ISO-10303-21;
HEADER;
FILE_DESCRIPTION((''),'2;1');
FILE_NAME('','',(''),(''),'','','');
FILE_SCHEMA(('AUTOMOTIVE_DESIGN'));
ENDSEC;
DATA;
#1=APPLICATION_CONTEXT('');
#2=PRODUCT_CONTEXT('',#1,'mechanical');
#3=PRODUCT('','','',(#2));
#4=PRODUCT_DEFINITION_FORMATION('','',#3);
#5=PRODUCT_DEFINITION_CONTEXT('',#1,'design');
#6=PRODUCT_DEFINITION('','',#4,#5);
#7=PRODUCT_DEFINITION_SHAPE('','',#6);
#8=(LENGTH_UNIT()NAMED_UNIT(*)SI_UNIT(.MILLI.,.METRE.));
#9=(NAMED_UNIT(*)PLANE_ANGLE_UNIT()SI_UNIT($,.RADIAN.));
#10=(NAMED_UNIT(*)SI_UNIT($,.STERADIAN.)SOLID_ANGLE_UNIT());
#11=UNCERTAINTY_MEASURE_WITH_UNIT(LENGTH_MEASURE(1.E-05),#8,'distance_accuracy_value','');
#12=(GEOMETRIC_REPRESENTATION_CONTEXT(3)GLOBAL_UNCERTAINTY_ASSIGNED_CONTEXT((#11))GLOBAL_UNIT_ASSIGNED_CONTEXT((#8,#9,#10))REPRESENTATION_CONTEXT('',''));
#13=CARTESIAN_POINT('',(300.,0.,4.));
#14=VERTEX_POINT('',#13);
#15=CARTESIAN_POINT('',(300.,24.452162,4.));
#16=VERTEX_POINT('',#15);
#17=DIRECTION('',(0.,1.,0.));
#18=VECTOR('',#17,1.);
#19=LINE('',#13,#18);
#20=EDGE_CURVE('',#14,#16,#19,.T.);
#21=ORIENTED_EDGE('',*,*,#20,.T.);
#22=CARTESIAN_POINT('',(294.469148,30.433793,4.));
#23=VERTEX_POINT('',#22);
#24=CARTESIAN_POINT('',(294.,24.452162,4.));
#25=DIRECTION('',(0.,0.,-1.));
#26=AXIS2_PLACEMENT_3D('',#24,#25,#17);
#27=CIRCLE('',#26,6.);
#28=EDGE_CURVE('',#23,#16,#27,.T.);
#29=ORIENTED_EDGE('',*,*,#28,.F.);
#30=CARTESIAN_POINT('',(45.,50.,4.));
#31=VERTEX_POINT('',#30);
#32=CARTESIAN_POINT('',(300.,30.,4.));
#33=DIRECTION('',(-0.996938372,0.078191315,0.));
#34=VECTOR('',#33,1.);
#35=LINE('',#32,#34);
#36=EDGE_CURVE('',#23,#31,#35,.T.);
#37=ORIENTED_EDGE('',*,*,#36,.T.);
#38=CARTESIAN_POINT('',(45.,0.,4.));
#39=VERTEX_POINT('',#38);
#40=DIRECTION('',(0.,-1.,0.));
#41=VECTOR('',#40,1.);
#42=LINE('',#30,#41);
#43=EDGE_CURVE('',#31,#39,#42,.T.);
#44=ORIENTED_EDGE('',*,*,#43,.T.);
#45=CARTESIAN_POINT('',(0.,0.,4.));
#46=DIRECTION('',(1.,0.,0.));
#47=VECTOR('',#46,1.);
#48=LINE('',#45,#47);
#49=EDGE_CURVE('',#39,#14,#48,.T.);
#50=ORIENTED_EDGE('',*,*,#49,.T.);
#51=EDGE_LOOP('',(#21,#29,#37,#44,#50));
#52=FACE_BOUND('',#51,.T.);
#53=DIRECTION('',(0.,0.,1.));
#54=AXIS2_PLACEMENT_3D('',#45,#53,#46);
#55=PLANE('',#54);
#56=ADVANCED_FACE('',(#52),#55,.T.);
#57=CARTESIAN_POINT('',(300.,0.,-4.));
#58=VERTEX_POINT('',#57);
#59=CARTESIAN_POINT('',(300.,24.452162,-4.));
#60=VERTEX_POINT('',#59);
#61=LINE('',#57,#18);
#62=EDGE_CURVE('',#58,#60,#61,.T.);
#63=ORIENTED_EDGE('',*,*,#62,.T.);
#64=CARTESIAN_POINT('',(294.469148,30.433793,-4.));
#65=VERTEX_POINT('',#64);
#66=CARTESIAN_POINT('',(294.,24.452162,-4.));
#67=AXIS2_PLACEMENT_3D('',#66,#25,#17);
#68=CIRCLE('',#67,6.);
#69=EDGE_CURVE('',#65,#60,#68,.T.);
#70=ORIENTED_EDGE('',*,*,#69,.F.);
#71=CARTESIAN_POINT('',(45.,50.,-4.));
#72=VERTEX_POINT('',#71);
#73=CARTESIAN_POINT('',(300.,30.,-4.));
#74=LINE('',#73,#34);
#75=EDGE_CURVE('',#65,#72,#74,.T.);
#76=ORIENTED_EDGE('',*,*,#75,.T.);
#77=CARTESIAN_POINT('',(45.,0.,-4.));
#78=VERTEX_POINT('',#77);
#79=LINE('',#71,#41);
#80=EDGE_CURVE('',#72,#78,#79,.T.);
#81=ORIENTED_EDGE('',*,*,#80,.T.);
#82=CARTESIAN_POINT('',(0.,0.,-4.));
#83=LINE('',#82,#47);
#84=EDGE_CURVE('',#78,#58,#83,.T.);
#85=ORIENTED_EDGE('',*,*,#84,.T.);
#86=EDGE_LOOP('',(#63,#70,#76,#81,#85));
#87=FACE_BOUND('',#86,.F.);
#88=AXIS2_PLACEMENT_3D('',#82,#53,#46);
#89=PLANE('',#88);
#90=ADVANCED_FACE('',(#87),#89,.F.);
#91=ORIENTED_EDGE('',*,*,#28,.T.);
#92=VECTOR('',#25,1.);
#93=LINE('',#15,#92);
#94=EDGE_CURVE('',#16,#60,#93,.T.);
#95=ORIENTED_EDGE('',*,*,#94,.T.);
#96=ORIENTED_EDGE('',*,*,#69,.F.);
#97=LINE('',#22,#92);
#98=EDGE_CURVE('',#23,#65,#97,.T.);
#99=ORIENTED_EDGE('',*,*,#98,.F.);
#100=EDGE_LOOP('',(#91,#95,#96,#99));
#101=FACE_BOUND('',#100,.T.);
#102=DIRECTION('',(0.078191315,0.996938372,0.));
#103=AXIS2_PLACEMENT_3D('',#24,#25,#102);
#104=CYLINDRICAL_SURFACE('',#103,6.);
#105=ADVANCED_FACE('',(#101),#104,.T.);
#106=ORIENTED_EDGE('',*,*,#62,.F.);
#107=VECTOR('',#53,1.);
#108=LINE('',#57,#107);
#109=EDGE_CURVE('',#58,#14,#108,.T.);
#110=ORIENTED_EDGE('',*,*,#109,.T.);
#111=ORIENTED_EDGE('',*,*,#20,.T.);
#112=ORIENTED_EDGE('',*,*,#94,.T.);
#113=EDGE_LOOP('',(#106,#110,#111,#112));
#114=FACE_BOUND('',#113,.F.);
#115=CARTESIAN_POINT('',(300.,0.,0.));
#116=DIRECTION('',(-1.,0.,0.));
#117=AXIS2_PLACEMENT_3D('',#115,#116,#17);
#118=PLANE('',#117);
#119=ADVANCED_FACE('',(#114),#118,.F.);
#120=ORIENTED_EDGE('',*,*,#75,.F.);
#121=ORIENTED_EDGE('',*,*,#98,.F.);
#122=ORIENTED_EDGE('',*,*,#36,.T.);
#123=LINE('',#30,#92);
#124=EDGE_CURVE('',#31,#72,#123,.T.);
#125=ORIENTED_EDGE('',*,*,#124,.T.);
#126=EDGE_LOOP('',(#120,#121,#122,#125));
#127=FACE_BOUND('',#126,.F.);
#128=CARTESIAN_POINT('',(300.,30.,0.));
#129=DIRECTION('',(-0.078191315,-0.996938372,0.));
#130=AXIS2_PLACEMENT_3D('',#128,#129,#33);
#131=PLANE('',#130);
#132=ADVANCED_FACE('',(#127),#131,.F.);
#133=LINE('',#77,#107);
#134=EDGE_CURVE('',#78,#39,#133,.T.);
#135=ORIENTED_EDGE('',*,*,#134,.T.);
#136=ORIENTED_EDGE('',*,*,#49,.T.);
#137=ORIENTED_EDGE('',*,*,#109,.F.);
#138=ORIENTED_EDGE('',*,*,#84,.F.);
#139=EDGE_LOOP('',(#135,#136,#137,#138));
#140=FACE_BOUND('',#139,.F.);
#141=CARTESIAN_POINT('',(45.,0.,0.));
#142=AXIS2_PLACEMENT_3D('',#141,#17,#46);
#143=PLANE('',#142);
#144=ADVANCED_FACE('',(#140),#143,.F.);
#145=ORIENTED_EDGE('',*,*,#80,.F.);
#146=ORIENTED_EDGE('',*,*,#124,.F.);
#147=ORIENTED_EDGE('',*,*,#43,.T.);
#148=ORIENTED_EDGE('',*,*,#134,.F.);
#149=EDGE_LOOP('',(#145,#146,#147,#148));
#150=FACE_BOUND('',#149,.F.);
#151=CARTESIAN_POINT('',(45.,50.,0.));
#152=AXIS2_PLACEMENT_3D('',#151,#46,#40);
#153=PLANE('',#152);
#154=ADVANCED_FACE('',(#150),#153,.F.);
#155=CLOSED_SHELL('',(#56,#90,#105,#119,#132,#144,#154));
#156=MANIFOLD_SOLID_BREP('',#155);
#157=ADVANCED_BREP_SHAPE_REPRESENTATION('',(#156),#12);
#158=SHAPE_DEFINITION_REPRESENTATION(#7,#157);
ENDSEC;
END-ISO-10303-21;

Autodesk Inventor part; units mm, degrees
ref_plane "YZ Plane" through (0, 0, 0) normal (1, 0, 0) x (0, 1, 0)
ref_plane "XZ Plane" through (0, 0, 0) normal (0, 1, 0) x (-1, 0, 0)
ref_plane "XY Plane" through (0, 0, 0) normal (0, 0, 1) x (1, 0, 0)
sketch "Sketch3" plane through (0, 0, 0) normal (0, 0, 1) x (1, 0, 0)
  line L0 (0, 0) -> (300, 0)
  line L1 (300, 0) -> (300, 30)
  line L2 (300, 30) -> (-5.542, 53.9641)
  line L3 (45, 50) -> (45, 0)
  dimension "d11" = 300
  dimension "d12" = 30
  dimension "d13" = 45
  dimension "d14" = 50
extrude "Plate1" add sketch "Sketch3" along normal mid plane 8
fillet "Corner Round1" radius 6 1 edges at (300, 30, 0)
equation "\"d15\" = Thickness"
equation "\"BendRadius\" = Thickness"
equation "\"BendReliefWidth\" = Thickness"
equation "\"BendReliefDepth\" = 0.5 * Thickness"
equation "\"CornerReliefSize\" = 4 * Thickness"
equation "\"MinimumRemnant\" = 2 * Thickness"
equation "\"TransitionRadius\" = BendRadius"
equation "\"JacobiRadiusSize\" = BendRadius"
equation "\"GapSize\" = Thickness"
equation "\"Thickness\" = 8"
properties part number "PRS 1614 charging hatch reinf 500mm_D1200" material "Steel"
